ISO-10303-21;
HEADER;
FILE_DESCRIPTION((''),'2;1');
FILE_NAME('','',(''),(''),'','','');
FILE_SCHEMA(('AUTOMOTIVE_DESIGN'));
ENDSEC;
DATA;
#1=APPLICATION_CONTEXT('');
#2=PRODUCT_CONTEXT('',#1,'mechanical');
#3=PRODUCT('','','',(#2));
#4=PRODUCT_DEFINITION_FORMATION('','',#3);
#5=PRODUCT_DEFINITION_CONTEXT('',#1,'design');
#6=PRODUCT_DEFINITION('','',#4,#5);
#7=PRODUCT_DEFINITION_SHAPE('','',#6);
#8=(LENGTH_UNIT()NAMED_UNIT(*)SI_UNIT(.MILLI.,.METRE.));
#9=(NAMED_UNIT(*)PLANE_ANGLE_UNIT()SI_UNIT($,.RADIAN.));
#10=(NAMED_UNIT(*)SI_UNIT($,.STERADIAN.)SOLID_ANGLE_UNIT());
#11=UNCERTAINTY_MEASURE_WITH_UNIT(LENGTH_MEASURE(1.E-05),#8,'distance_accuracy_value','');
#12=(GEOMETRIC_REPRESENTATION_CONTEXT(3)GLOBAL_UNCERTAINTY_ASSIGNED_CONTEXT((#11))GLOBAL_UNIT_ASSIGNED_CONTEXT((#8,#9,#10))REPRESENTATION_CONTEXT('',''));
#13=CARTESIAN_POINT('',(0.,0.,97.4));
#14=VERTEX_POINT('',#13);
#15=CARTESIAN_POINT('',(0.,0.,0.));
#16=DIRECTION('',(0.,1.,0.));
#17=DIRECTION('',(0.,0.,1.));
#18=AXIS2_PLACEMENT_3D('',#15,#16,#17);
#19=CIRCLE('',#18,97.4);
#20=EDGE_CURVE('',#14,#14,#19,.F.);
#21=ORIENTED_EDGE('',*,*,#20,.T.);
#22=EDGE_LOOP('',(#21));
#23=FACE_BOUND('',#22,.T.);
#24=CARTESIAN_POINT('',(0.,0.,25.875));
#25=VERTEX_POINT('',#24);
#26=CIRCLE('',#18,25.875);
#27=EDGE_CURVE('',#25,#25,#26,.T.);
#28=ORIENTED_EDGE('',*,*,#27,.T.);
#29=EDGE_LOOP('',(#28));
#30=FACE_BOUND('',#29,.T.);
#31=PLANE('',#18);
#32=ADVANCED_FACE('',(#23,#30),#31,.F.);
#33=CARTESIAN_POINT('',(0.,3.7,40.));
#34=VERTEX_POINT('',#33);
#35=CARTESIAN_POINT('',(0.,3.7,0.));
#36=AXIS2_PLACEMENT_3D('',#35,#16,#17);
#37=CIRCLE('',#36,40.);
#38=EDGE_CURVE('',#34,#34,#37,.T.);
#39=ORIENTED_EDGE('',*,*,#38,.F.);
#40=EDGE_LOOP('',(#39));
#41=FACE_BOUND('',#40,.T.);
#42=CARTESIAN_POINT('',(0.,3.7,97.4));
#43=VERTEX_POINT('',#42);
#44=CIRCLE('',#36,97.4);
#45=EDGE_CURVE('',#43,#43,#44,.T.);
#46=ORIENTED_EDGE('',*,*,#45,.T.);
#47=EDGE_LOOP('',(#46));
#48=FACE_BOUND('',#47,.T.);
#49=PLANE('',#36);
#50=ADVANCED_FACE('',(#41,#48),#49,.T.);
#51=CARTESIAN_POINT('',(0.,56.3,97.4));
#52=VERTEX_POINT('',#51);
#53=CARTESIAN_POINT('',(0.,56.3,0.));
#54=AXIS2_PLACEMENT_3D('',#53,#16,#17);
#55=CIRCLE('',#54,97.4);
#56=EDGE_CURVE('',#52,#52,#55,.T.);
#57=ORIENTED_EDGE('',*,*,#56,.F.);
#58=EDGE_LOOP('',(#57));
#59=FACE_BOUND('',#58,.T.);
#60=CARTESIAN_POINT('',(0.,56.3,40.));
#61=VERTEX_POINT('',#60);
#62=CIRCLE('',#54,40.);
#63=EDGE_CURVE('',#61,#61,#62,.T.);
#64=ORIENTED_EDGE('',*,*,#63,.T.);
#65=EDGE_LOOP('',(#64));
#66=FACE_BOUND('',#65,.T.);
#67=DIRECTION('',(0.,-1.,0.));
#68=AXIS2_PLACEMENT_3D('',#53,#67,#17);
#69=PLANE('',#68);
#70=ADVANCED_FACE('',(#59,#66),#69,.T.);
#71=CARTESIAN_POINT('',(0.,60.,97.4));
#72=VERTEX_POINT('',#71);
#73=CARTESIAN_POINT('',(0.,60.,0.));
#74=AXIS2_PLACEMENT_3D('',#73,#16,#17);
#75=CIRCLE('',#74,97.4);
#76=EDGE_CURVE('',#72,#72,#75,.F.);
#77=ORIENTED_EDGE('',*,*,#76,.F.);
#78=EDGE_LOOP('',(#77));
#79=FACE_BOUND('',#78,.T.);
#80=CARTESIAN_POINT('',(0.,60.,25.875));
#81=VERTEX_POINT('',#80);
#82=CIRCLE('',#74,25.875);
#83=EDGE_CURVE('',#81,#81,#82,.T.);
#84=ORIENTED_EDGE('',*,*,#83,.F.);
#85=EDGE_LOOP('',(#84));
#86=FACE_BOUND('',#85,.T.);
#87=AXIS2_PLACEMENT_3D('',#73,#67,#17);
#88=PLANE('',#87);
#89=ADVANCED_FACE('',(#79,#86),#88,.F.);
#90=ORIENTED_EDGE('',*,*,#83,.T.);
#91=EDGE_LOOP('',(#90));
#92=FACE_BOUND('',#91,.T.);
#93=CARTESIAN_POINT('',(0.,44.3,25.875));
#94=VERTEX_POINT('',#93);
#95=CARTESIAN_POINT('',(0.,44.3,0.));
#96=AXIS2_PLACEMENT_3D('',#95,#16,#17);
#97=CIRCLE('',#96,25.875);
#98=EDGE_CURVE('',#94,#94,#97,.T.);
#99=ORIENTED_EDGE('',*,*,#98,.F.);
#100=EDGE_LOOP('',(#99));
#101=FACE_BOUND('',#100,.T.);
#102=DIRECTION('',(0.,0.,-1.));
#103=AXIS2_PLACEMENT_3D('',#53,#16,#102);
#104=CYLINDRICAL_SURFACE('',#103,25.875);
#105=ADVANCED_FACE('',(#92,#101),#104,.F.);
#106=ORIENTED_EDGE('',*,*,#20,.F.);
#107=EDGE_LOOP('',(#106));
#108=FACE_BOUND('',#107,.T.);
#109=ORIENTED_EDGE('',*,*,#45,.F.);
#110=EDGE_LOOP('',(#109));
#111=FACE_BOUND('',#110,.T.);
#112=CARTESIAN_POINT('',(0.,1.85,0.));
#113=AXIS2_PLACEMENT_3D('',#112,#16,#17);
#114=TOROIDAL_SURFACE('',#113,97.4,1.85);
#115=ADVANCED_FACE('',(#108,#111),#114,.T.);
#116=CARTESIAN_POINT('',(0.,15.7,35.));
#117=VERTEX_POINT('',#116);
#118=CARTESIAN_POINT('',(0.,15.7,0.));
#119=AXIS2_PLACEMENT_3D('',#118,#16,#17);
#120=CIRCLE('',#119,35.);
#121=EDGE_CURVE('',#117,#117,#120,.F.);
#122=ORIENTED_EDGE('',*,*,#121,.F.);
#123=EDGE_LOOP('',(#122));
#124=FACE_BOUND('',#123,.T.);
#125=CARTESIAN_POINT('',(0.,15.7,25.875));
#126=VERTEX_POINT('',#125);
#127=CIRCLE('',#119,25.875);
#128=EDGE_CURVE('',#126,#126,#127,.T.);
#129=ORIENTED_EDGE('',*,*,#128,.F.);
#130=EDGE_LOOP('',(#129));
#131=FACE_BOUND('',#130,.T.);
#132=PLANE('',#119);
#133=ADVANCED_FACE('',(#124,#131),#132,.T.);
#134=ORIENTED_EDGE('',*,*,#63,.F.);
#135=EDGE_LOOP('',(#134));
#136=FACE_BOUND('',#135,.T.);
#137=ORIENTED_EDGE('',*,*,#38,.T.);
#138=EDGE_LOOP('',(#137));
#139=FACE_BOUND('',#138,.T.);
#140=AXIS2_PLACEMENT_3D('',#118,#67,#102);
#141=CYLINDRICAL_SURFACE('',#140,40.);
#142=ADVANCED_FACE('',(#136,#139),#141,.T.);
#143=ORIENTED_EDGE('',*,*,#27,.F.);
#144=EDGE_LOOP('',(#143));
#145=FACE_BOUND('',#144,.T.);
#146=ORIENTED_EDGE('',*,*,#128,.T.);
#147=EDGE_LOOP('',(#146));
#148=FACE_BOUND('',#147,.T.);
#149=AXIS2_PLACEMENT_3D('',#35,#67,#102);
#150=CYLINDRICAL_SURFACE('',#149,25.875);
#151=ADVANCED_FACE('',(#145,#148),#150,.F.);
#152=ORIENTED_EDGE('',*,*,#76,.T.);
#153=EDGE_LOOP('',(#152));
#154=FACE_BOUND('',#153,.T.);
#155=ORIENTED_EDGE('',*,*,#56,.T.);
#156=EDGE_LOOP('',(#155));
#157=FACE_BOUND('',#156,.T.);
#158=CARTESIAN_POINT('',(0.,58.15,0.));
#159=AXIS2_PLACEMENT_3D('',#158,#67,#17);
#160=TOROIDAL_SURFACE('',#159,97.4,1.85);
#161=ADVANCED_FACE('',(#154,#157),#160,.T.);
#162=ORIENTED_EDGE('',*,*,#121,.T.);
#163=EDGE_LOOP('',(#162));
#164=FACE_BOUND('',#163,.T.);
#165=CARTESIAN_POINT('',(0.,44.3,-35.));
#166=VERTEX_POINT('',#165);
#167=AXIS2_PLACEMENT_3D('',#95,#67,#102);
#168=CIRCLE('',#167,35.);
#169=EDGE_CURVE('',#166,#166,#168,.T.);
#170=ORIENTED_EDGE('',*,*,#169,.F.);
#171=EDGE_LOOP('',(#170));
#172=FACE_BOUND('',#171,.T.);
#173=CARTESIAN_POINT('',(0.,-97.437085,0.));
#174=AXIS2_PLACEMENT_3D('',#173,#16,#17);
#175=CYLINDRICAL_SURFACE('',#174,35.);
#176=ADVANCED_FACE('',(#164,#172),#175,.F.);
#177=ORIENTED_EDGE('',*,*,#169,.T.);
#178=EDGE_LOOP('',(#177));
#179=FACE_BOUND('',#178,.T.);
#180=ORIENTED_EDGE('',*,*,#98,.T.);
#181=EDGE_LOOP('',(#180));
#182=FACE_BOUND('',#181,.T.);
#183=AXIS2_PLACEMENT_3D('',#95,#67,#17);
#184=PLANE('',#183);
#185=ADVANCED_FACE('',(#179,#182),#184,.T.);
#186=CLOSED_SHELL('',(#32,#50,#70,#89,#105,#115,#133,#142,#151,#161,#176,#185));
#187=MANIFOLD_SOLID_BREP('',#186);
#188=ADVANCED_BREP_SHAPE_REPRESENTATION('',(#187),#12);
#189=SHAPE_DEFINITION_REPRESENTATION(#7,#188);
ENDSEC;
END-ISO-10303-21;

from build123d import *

# Parameters (mm, degrees)
SKETCH1_R           = 99.25
SKETCH1_R_2         = 25.875
BOSS_EXTRUDE1_DEPTH = 3.7
FILLET1_R           = 1.85
SKETCH2_R           = 40
SKETCH2_R_2         = 25.875
BOSS_EXTRUDE2_DEPTH = 12
BOSS_EXTRUDE3_START = 28.6
SKETCH3_R           = 40
SKETCH3_R_2         = 35
BOSS_EXTRUDE3_DEPTH = 28.6


with BuildPart() as part:
    # Sketch1 → Boss-Extrude1 (new body)
    with BuildSketch(Plane(origin=(0, 0, 0), x_dir=(1, 0, 0), z_dir=(0, 1, 0))):
        with Locations(Location((0, 0, 0), (0, 0, 270))):
            Circle(SKETCH1_R)
        with Locations(Location((0, 0, 0), (0, 0, 270))):
            Circle(SKETCH1_R_2, mode=Mode.SUBTRACT)
    extrude(amount=BOSS_EXTRUDE1_DEPTH)

    # Fillet1
    fillet1_edges = [part.edges().sort_by_distance(p)[0] for p in [
        (0, 0, -99.25),
        (0, 3.7, -99.25),
    ]]
    fillet(fillet1_edges, radius=FILLET1_R - 0.0001)  # a hair under: the kernel refuses the full size

    # Sketch2 → Boss-Extrude2 (add)
    with BuildSketch(Plane(origin=(0, 3.7, 0), x_dir=(1, 0, 0), z_dir=(0, 1, 0))):
        with Locations(Location((0, 0, 0), (0, 0, 270))):
            Circle(SKETCH2_R)
        with Locations(Location((0, 0, 0), (0, 0, 270))):
            Circle(SKETCH2_R_2, mode=Mode.SUBTRACT)
    extrude(amount=BOSS_EXTRUDE2_DEPTH)


with BuildPart() as body_2:
    # Mirror2: mirrored copy
    add(part.part.mirror(Plane.ZX.offset(30)))


with BuildPart() as part_1:
    add(part.part)

    add(body_2.part)  # Boss-Extrude3 merges body 2
    # Sketch3 → Boss-Extrude3 (add)
    with BuildSketch(Plane.XZ.offset(-44.3).offset(BOSS_EXTRUDE3_START)):
        with Locations(Location((0, 0, 0), (0, 0, 90))):
            Circle(SKETCH3_R)
        with Locations(Location((0, 0, 0), (0, 0, 90))):
            Circle(SKETCH3_R_2, mode=Mode.SUBTRACT)
    extrude(amount=-BOSS_EXTRUDE3_DEPTH)


solid = part_1.part
